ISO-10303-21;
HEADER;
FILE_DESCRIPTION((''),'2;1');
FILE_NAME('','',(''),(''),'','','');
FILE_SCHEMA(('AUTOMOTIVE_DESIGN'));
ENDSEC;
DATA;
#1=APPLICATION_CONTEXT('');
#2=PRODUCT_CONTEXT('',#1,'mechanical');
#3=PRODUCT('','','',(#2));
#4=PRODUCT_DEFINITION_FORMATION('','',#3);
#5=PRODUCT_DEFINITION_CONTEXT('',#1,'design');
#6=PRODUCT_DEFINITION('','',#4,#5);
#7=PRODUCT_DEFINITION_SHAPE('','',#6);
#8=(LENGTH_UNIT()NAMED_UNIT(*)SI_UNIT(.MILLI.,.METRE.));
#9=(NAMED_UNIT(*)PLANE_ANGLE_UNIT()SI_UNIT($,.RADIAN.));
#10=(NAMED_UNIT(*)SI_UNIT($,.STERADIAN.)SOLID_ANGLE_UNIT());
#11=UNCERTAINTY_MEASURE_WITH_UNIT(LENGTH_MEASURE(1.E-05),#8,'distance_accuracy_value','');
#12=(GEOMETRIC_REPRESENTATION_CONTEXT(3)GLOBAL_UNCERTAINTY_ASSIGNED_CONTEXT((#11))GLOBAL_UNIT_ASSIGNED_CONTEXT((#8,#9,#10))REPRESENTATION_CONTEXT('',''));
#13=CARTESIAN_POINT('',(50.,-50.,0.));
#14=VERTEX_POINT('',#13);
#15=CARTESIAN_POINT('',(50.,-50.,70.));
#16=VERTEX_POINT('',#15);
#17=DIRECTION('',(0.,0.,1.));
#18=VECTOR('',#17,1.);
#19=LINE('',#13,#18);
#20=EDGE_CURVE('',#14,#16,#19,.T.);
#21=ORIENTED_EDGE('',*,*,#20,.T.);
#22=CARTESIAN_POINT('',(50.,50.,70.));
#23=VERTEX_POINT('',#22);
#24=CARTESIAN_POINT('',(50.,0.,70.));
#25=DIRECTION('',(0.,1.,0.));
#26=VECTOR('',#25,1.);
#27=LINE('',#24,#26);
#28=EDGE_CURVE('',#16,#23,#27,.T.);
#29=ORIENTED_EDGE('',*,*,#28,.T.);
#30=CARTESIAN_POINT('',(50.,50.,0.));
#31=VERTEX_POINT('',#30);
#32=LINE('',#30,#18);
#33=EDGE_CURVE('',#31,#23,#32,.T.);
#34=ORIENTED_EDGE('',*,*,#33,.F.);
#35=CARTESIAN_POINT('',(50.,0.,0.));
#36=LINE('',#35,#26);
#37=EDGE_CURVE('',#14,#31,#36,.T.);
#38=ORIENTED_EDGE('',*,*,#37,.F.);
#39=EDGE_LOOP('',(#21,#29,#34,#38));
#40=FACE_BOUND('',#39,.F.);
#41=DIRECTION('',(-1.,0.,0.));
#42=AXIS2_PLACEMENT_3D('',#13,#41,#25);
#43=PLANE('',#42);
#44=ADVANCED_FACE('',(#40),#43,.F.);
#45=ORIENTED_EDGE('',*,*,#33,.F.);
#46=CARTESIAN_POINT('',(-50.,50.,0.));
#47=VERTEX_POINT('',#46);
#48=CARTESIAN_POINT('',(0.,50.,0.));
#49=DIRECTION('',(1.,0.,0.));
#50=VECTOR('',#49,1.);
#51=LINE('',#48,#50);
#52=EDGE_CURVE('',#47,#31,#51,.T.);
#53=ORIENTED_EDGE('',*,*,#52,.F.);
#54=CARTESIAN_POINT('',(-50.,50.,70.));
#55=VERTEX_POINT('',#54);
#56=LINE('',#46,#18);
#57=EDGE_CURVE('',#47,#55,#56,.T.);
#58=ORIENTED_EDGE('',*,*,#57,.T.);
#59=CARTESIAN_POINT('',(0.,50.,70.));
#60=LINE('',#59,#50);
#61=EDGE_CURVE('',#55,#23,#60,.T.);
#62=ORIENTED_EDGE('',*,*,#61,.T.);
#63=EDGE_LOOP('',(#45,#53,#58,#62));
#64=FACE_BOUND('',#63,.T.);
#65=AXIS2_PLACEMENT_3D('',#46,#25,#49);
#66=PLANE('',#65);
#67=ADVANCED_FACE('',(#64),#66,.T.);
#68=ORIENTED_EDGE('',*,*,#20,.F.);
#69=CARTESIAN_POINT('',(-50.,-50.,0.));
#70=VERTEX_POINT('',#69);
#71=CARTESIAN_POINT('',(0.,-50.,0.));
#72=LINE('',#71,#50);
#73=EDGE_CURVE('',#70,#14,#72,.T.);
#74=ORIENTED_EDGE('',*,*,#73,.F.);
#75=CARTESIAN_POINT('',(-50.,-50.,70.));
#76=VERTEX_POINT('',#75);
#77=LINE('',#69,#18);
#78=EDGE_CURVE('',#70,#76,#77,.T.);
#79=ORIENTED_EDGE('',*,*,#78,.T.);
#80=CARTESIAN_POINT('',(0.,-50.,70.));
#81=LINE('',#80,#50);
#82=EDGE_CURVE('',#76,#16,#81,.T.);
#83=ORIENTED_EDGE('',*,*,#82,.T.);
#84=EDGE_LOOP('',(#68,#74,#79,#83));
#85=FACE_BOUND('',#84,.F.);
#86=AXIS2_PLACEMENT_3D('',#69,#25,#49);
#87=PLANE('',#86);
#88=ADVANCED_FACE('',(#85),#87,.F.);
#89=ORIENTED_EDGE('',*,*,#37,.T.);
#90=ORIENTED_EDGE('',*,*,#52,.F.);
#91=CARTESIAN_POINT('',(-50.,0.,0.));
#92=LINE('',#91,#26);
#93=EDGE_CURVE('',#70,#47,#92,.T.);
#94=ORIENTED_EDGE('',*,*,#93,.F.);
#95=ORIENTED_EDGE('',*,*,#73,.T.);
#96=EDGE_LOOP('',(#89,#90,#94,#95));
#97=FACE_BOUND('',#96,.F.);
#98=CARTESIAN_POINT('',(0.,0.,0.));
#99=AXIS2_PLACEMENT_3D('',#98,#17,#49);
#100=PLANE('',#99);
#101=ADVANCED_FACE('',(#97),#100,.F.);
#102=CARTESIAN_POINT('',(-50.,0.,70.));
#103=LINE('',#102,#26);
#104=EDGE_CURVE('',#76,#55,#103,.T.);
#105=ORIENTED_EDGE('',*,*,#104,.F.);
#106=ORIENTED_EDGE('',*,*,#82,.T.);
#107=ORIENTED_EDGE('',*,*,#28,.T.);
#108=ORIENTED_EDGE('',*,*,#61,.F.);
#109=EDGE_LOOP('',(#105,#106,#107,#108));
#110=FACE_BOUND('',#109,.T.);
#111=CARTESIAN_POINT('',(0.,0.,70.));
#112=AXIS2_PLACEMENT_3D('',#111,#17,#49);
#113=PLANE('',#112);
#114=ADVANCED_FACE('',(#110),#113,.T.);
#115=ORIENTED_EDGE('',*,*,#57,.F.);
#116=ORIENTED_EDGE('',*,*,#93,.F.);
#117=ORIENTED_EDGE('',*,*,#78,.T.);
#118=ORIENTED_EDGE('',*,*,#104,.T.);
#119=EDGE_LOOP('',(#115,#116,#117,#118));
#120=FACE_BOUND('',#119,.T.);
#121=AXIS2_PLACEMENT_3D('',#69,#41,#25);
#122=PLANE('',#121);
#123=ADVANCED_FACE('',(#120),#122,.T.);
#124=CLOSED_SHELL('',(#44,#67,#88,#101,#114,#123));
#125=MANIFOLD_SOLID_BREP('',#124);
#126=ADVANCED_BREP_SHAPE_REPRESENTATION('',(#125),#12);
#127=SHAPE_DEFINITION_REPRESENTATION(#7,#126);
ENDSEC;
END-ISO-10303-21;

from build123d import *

# Parameters (mm, degrees)
F0_W     = 100
F0_H     = 100
F3_DEPTH = 70


# Not quite as in the source:
# - a feature of the source that left no trace in its solid (it failed there, or was rolled back) is left out


with BuildPart() as f3:
    # F0 (on Top) → F3 (new body)
    with BuildSketch(Plane.XY):
        Rectangle(F0_W, F0_H)
    extrude(amount=F3_DEPTH)


solid = f3.part
